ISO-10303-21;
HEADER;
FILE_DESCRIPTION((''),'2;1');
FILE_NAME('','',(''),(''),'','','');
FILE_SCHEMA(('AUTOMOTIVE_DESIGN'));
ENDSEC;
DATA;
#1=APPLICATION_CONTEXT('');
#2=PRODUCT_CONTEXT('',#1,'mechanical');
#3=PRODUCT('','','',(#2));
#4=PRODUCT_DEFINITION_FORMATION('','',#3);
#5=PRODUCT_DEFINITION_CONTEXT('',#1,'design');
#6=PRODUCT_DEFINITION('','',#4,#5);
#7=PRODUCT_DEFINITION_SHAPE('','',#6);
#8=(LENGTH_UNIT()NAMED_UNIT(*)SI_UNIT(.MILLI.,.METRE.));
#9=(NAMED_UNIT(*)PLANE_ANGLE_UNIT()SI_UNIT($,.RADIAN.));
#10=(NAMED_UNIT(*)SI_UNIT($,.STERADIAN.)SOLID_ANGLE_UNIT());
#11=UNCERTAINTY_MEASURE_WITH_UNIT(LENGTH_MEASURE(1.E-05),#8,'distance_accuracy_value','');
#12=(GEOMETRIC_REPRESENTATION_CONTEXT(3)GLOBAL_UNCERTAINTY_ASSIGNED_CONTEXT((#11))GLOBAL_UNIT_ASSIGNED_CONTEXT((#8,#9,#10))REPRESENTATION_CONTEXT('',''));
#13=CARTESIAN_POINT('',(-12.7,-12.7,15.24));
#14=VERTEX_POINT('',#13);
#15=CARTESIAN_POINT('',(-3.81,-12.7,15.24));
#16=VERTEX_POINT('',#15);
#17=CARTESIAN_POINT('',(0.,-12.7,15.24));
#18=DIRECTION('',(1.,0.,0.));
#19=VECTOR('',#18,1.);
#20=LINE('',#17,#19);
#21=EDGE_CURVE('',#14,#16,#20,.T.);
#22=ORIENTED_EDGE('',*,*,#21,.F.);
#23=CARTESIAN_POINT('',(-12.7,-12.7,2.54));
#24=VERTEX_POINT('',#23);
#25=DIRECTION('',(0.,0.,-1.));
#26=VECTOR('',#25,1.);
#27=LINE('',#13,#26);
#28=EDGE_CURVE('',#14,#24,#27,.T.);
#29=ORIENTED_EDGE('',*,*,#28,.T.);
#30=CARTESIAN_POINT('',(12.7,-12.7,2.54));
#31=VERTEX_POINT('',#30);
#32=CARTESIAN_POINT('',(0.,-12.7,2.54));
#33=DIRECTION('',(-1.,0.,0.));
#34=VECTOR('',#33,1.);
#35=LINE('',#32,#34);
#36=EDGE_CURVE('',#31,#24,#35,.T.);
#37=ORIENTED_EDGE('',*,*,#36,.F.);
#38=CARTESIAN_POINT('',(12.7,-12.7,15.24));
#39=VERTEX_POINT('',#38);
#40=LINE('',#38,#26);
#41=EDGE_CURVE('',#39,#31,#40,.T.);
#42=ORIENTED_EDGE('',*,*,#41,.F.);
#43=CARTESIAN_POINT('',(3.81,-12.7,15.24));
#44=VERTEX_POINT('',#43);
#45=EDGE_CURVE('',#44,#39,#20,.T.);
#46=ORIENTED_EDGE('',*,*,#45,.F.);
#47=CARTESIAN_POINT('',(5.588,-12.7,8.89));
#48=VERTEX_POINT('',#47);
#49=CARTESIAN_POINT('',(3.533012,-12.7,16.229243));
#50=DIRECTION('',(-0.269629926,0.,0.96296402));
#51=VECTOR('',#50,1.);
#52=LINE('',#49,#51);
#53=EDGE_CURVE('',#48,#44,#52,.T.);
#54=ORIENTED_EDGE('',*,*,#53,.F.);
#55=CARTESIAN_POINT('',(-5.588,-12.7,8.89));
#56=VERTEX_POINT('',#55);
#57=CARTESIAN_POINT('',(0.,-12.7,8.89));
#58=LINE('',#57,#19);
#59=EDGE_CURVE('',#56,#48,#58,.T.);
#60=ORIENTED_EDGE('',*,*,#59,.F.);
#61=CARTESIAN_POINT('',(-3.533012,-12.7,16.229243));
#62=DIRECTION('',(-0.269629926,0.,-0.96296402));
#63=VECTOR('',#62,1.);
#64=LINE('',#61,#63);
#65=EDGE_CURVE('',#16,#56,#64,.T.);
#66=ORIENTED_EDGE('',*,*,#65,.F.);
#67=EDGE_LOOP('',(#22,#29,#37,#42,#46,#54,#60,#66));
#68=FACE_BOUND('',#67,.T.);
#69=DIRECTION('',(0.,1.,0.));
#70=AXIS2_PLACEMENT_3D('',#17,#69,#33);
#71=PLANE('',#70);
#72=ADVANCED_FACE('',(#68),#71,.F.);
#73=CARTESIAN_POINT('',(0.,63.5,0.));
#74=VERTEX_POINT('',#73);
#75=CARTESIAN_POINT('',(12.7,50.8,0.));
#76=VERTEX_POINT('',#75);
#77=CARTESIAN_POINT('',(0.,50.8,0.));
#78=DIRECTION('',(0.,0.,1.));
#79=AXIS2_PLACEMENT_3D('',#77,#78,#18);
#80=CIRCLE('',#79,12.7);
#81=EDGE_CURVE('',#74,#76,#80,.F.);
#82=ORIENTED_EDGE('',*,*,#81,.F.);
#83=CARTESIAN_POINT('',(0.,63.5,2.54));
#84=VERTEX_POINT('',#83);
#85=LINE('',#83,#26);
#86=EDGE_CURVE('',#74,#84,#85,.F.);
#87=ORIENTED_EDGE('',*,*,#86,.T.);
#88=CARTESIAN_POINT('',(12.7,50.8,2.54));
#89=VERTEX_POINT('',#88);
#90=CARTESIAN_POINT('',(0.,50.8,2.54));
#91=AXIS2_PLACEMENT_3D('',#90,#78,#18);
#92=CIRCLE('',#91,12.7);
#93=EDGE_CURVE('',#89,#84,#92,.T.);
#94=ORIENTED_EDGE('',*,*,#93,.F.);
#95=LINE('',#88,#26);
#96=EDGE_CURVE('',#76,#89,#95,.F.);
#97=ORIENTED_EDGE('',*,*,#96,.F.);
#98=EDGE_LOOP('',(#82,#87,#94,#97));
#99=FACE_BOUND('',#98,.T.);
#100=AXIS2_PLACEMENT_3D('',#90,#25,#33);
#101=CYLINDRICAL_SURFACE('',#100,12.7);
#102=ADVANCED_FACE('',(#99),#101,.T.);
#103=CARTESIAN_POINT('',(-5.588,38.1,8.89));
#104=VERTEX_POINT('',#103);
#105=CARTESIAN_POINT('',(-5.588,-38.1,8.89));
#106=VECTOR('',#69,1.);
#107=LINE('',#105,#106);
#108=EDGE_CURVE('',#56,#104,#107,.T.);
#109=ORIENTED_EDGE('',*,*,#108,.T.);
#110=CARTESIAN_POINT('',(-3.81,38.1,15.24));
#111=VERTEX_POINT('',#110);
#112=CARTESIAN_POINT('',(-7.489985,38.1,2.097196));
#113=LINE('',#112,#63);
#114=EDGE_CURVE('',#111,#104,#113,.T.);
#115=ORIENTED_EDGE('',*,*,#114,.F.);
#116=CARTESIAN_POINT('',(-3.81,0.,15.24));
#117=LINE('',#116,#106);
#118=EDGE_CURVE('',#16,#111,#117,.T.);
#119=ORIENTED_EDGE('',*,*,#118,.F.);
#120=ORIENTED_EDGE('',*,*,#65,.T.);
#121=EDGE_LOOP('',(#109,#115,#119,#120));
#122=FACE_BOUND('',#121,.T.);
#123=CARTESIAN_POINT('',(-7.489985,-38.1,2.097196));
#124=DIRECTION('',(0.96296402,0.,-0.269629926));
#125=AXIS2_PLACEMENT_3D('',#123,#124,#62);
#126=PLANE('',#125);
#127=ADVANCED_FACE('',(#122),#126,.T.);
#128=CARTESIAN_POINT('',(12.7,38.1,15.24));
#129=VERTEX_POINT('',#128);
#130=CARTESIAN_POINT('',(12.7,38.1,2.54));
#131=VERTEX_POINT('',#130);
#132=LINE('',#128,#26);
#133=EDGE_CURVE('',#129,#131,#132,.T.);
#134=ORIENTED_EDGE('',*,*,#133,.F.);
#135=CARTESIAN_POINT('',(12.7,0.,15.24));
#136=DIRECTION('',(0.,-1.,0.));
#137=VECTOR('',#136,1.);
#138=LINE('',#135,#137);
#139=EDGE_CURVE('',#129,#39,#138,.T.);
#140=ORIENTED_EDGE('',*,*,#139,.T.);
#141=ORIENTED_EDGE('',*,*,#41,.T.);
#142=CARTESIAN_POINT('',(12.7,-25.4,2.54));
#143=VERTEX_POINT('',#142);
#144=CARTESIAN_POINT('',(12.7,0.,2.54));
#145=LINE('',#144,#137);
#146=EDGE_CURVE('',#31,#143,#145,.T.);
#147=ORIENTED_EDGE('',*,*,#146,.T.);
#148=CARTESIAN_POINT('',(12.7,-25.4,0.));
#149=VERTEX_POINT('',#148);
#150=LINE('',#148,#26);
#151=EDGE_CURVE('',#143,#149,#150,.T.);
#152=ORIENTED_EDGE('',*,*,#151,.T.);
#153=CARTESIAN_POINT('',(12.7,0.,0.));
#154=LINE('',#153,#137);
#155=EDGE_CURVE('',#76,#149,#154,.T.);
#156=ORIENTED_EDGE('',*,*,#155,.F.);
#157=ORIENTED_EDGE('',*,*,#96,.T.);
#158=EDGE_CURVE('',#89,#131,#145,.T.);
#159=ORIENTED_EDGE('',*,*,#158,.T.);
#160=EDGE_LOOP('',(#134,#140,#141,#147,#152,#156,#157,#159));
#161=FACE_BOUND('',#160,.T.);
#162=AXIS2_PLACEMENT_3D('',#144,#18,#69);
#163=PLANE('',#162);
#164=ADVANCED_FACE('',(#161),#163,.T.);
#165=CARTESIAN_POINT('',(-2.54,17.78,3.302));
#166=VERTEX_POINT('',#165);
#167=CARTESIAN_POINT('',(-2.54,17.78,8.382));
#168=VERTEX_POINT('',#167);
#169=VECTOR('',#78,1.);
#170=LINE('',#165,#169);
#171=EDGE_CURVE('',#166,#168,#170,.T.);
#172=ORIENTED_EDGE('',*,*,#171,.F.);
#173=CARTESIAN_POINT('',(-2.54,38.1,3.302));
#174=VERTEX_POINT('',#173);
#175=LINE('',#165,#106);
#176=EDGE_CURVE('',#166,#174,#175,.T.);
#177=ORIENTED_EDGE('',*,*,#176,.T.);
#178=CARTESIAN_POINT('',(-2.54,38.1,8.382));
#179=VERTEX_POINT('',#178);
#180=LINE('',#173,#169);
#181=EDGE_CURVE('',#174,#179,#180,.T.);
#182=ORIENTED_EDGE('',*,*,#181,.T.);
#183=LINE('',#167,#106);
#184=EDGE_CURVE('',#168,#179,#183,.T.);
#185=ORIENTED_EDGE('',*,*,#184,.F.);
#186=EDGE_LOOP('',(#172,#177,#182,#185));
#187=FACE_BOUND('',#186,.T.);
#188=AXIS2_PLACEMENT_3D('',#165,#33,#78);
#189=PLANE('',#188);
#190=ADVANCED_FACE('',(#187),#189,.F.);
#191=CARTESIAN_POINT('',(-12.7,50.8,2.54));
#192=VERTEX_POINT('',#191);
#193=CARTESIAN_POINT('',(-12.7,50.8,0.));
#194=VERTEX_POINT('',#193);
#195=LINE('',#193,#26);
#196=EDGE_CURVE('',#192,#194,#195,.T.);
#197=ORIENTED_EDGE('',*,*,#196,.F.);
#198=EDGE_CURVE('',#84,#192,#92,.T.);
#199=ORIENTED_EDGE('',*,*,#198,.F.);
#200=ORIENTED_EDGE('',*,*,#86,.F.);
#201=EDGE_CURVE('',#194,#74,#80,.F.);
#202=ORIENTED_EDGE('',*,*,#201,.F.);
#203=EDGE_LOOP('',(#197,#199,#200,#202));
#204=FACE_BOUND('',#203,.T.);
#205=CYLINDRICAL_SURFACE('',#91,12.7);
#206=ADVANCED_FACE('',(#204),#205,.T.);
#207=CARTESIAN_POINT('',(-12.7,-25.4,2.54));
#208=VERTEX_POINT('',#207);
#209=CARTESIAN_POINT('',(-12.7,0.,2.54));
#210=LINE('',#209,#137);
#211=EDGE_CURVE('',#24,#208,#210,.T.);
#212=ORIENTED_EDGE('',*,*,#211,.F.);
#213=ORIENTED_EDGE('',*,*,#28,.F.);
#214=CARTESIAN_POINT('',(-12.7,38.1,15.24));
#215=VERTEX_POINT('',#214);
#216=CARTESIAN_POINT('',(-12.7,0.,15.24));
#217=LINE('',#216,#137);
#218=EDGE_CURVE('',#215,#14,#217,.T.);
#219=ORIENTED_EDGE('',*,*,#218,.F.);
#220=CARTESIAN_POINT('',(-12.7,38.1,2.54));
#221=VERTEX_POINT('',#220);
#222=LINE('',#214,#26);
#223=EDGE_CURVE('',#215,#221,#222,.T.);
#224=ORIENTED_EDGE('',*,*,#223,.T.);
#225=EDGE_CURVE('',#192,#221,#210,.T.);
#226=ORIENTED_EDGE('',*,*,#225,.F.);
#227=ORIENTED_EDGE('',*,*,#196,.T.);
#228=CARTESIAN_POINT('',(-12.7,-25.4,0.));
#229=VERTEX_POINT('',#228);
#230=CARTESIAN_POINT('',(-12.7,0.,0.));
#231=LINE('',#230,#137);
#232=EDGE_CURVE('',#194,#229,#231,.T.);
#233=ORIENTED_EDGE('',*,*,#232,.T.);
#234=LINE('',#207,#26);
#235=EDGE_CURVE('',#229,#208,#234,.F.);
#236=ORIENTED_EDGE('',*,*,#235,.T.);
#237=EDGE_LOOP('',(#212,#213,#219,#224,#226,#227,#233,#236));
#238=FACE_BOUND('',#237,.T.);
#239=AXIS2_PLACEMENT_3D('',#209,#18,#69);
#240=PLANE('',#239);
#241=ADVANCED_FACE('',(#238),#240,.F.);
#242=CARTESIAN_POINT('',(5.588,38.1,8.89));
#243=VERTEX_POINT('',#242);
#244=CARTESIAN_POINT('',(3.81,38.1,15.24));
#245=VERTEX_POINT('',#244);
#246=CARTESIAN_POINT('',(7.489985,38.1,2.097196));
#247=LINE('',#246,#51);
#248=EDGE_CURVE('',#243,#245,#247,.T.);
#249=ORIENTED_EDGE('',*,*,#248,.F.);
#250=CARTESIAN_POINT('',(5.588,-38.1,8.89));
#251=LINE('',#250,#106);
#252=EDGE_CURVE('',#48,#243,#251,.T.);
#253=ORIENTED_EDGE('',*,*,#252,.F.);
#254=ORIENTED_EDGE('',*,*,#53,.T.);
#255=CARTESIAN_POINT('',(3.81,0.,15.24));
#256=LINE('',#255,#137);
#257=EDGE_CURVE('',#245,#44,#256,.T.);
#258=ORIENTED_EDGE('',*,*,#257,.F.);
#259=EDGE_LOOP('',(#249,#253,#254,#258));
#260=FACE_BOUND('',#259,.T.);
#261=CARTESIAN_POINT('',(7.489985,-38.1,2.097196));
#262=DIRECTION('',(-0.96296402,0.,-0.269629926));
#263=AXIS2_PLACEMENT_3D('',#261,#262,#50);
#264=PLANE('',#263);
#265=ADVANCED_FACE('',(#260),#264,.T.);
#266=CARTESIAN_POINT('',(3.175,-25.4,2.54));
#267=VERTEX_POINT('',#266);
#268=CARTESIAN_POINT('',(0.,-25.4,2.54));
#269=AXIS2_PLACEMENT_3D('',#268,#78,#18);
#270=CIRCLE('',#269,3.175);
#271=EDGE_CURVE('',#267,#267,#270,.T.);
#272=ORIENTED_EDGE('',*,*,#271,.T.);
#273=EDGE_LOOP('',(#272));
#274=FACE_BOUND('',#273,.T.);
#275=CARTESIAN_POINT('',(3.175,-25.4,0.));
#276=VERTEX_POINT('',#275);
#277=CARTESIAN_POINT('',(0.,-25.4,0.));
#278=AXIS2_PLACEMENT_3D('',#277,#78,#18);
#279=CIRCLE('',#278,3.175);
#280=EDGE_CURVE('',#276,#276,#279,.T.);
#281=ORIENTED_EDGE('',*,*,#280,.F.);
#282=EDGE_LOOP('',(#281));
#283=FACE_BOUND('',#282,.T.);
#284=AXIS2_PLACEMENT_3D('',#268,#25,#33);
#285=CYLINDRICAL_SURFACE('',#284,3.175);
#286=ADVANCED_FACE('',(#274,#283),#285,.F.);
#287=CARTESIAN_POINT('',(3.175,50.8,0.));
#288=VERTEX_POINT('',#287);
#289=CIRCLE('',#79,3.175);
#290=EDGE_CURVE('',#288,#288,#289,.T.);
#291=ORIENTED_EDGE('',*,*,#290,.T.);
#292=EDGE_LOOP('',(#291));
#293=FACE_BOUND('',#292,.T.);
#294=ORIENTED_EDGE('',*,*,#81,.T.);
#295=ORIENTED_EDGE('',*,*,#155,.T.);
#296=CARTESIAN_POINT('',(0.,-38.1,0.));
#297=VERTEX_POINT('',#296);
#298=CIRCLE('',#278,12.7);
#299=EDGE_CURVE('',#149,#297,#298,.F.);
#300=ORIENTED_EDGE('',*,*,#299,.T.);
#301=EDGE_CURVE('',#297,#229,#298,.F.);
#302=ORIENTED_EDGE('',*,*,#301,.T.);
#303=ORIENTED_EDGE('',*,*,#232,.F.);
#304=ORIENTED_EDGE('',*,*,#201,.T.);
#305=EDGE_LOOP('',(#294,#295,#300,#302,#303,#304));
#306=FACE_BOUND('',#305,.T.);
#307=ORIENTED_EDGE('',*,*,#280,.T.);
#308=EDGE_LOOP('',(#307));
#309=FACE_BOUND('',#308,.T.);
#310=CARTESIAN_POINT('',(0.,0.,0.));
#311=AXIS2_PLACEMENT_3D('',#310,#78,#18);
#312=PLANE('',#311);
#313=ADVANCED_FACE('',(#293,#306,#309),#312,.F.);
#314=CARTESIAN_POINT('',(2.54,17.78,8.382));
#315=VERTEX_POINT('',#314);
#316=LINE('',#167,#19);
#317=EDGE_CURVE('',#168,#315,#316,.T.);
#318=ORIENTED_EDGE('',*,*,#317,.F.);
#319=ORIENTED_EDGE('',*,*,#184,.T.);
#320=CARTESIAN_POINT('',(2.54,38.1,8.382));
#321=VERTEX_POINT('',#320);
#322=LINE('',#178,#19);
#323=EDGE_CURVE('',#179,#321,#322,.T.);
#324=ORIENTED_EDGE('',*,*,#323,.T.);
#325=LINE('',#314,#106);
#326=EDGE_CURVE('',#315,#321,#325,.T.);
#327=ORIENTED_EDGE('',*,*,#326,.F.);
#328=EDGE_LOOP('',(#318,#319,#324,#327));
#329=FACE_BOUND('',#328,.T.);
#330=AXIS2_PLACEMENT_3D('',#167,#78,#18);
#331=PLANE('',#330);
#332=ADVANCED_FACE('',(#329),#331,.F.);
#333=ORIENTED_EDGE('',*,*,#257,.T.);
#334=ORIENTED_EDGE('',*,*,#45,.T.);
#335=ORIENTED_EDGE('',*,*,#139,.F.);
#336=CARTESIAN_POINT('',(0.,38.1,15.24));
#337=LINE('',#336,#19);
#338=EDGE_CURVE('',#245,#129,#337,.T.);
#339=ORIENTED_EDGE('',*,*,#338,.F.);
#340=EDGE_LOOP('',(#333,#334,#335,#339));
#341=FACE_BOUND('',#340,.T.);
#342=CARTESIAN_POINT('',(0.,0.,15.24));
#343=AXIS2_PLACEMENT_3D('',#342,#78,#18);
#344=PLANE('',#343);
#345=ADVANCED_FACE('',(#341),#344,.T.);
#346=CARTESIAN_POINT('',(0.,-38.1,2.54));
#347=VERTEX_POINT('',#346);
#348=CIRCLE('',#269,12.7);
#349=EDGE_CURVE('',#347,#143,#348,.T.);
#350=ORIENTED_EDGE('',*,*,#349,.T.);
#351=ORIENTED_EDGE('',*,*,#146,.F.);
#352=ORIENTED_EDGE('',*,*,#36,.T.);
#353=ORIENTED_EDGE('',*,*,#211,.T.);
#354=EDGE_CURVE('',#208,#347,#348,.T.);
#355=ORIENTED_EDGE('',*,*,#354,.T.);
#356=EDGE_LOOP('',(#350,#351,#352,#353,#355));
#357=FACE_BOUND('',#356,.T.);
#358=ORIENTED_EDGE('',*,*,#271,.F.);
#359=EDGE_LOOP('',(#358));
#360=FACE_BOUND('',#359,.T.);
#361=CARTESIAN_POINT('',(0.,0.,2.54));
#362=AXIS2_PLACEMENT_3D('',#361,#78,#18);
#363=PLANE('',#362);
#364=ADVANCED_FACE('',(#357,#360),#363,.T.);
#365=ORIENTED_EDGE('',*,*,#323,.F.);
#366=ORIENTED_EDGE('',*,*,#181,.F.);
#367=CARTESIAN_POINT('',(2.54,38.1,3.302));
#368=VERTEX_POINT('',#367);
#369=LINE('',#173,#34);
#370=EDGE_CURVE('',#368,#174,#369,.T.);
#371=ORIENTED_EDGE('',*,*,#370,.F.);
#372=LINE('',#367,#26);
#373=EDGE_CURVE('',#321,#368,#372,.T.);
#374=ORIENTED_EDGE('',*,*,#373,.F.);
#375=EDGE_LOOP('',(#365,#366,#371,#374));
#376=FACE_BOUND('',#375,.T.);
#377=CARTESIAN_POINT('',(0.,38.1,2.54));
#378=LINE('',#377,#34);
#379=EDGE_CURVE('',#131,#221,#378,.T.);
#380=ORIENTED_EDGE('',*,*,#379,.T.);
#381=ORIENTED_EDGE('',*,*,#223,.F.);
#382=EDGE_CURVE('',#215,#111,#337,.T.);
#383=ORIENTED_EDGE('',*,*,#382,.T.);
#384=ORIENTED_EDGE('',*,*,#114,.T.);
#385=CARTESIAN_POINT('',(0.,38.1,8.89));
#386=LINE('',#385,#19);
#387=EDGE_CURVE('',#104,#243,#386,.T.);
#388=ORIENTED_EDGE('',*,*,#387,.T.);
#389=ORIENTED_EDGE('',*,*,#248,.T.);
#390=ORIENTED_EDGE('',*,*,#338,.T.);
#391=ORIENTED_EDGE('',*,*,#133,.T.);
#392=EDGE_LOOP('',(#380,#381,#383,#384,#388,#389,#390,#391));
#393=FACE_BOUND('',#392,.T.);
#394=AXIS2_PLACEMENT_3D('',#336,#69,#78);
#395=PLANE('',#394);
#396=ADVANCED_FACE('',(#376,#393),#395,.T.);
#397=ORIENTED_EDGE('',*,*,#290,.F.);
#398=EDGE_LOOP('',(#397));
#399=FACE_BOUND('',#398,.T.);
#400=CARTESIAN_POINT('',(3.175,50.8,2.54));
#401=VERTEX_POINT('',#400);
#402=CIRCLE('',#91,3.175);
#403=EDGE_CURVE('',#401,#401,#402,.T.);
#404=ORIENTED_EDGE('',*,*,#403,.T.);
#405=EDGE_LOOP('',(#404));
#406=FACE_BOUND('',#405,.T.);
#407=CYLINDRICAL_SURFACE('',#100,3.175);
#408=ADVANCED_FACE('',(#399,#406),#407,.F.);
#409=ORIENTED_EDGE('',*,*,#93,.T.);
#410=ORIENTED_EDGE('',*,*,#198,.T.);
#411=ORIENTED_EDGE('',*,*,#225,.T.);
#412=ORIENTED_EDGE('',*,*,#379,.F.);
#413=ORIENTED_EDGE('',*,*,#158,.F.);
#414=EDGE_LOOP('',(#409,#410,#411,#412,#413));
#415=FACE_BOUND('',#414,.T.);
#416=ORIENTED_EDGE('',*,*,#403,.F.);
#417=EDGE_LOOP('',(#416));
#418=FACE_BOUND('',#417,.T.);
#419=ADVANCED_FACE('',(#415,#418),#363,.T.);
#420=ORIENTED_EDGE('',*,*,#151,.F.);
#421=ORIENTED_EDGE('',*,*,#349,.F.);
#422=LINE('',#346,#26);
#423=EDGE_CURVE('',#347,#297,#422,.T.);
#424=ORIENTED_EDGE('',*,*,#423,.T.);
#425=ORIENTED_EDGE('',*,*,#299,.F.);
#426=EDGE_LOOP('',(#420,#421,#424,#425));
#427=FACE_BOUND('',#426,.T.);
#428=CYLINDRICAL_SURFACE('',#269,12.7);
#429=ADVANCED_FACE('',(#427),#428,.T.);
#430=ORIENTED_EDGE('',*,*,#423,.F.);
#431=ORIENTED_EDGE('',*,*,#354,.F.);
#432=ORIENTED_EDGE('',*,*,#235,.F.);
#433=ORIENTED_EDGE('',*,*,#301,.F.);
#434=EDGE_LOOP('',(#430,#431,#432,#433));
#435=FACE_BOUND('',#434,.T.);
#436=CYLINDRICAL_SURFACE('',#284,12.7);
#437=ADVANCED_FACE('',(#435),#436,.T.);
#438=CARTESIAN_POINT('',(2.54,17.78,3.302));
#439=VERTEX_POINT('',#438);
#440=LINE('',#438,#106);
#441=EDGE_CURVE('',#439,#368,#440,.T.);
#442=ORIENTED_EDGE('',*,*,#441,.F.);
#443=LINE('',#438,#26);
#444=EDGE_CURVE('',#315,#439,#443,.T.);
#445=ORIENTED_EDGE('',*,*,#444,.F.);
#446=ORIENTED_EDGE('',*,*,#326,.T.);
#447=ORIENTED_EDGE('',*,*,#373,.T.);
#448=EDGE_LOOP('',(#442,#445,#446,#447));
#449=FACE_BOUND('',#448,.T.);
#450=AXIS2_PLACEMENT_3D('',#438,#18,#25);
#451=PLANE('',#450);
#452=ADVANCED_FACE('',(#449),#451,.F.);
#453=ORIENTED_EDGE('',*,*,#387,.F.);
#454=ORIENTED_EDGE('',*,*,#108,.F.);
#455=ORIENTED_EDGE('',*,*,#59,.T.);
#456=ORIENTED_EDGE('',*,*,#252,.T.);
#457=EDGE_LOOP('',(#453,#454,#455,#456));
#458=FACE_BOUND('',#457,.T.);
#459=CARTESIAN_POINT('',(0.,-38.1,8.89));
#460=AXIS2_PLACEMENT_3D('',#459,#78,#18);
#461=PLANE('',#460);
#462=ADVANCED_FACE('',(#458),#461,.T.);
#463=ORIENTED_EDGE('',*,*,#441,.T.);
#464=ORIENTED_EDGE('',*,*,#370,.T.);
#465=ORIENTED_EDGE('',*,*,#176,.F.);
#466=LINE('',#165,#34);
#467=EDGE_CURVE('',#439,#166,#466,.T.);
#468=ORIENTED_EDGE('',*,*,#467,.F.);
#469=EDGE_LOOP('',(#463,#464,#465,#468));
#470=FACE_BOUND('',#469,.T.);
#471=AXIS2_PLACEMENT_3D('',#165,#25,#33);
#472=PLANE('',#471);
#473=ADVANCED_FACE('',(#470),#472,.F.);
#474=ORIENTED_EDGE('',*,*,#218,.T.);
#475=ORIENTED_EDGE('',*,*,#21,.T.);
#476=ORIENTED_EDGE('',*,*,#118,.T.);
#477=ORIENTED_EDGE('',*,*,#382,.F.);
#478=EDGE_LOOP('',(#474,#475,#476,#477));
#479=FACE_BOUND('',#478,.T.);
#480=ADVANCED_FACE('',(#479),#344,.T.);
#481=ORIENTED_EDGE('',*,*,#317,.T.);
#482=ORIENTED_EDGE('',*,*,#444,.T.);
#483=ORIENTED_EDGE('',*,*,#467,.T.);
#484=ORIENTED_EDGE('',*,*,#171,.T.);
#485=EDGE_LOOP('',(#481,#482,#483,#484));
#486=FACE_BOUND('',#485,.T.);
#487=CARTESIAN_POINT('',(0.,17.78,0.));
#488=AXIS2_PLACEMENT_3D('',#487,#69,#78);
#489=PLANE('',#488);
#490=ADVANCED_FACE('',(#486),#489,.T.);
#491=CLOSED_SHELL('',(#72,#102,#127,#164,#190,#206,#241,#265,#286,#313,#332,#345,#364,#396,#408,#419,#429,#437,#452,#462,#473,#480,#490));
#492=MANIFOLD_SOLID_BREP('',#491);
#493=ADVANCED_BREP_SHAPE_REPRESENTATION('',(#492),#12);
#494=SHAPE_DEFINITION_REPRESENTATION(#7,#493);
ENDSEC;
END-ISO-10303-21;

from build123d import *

# Parameters (mm, degrees)
SKETCH1_W           = 25.4
SKETCH1_H           = 25.4
SKETCH1_R           = 3.175
SKETCH1_H_2         = 50.8
BOSS_EXTRUDE1_DEPTH = 2.54
SKETCH1_3_W         = 25.4
SKETCH1_3_H         = 50.8
BOSS_EXTRUDE2_DEPTH = 15.24
CUT_EXTRUDE1_DEPTH  = 79.74
FILLET1_R           = 12.7
SKETCH4_W           = 5.08
SKETCH4_H           = 5.08
CUT_EXTRUDE2_DEPTH  = 20.32


with BuildPart() as part:
    # Sketch1 → Boss-Extrude1 (new body)
    # profile 1 of 3: a face of its own
    with BuildSketch(Plane.XY):
        with Locations((0, 50.8)):
            Rectangle(SKETCH1_W, SKETCH1_H)
        with Locations((0, 50.8)):
            Circle(SKETCH1_R, mode=Mode.SUBTRACT)
    # profile 2 of 3: a face of its own
    with BuildSketch(Plane.XY):
        with Locations((0, 12.7)):
            Rectangle(SKETCH1_W, SKETCH1_H_2)
    # profile 3 of 3: a face of its own
    with BuildSketch(Plane.XY):
        with Locations((0, -25.4)):
            Rectangle(SKETCH1_W, SKETCH1_H)
        with Locations((0, -25.4)):
            Circle(SKETCH1_R, mode=Mode.SUBTRACT)
    extrude(amount=BOSS_EXTRUDE1_DEPTH)

    # Sketch1<3> → Boss-Extrude2 (add)
    with BuildSketch(Plane.XY):
        with Locations((0, 12.7)):
            Rectangle(SKETCH1_3_W, SKETCH1_3_H)
    extrude(amount=BOSS_EXTRUDE2_DEPTH)

    # Sketch3 → Cut-Extrude1 (cut, through all)
    with BuildSketch(Plane(origin=(0, 38.1, 0), x_dir=(1, 0, 0), z_dir=(0, 1, 0))):
        Polygon((-5.588, -8.89), (-3.81, -15.24), (3.81, -15.24), (5.588, -8.89), align=None)
    extrude(amount=-CUT_EXTRUDE1_DEPTH, mode=Mode.SUBTRACT)

    # Fillet1
    fillet1_edges = [part.edges().sort_by_distance(p)[0] for p in [
        (12.7, -38.1, 1.27),
        (-12.7, -38.1, 1.27),
        (12.7, 63.5, 1.27),
        (-12.7, 63.5, 1.27),
    ]]
    fillet(fillet1_edges, radius=FILLET1_R - 0.0001)  # a hair under: the kernel refuses the full size

    # Sketch4 → Cut-Extrude2 (cut)
    with BuildSketch(Plane(origin=(0, 38.1, 0), x_dir=(1, 0, 0), z_dir=(0, 1, 0))):
        with Locations((0, -5.842)):
            Rectangle(SKETCH4_W, SKETCH4_H)
    extrude(amount=-CUT_EXTRUDE2_DEPTH, mode=Mode.SUBTRACT)


solid = part.part
